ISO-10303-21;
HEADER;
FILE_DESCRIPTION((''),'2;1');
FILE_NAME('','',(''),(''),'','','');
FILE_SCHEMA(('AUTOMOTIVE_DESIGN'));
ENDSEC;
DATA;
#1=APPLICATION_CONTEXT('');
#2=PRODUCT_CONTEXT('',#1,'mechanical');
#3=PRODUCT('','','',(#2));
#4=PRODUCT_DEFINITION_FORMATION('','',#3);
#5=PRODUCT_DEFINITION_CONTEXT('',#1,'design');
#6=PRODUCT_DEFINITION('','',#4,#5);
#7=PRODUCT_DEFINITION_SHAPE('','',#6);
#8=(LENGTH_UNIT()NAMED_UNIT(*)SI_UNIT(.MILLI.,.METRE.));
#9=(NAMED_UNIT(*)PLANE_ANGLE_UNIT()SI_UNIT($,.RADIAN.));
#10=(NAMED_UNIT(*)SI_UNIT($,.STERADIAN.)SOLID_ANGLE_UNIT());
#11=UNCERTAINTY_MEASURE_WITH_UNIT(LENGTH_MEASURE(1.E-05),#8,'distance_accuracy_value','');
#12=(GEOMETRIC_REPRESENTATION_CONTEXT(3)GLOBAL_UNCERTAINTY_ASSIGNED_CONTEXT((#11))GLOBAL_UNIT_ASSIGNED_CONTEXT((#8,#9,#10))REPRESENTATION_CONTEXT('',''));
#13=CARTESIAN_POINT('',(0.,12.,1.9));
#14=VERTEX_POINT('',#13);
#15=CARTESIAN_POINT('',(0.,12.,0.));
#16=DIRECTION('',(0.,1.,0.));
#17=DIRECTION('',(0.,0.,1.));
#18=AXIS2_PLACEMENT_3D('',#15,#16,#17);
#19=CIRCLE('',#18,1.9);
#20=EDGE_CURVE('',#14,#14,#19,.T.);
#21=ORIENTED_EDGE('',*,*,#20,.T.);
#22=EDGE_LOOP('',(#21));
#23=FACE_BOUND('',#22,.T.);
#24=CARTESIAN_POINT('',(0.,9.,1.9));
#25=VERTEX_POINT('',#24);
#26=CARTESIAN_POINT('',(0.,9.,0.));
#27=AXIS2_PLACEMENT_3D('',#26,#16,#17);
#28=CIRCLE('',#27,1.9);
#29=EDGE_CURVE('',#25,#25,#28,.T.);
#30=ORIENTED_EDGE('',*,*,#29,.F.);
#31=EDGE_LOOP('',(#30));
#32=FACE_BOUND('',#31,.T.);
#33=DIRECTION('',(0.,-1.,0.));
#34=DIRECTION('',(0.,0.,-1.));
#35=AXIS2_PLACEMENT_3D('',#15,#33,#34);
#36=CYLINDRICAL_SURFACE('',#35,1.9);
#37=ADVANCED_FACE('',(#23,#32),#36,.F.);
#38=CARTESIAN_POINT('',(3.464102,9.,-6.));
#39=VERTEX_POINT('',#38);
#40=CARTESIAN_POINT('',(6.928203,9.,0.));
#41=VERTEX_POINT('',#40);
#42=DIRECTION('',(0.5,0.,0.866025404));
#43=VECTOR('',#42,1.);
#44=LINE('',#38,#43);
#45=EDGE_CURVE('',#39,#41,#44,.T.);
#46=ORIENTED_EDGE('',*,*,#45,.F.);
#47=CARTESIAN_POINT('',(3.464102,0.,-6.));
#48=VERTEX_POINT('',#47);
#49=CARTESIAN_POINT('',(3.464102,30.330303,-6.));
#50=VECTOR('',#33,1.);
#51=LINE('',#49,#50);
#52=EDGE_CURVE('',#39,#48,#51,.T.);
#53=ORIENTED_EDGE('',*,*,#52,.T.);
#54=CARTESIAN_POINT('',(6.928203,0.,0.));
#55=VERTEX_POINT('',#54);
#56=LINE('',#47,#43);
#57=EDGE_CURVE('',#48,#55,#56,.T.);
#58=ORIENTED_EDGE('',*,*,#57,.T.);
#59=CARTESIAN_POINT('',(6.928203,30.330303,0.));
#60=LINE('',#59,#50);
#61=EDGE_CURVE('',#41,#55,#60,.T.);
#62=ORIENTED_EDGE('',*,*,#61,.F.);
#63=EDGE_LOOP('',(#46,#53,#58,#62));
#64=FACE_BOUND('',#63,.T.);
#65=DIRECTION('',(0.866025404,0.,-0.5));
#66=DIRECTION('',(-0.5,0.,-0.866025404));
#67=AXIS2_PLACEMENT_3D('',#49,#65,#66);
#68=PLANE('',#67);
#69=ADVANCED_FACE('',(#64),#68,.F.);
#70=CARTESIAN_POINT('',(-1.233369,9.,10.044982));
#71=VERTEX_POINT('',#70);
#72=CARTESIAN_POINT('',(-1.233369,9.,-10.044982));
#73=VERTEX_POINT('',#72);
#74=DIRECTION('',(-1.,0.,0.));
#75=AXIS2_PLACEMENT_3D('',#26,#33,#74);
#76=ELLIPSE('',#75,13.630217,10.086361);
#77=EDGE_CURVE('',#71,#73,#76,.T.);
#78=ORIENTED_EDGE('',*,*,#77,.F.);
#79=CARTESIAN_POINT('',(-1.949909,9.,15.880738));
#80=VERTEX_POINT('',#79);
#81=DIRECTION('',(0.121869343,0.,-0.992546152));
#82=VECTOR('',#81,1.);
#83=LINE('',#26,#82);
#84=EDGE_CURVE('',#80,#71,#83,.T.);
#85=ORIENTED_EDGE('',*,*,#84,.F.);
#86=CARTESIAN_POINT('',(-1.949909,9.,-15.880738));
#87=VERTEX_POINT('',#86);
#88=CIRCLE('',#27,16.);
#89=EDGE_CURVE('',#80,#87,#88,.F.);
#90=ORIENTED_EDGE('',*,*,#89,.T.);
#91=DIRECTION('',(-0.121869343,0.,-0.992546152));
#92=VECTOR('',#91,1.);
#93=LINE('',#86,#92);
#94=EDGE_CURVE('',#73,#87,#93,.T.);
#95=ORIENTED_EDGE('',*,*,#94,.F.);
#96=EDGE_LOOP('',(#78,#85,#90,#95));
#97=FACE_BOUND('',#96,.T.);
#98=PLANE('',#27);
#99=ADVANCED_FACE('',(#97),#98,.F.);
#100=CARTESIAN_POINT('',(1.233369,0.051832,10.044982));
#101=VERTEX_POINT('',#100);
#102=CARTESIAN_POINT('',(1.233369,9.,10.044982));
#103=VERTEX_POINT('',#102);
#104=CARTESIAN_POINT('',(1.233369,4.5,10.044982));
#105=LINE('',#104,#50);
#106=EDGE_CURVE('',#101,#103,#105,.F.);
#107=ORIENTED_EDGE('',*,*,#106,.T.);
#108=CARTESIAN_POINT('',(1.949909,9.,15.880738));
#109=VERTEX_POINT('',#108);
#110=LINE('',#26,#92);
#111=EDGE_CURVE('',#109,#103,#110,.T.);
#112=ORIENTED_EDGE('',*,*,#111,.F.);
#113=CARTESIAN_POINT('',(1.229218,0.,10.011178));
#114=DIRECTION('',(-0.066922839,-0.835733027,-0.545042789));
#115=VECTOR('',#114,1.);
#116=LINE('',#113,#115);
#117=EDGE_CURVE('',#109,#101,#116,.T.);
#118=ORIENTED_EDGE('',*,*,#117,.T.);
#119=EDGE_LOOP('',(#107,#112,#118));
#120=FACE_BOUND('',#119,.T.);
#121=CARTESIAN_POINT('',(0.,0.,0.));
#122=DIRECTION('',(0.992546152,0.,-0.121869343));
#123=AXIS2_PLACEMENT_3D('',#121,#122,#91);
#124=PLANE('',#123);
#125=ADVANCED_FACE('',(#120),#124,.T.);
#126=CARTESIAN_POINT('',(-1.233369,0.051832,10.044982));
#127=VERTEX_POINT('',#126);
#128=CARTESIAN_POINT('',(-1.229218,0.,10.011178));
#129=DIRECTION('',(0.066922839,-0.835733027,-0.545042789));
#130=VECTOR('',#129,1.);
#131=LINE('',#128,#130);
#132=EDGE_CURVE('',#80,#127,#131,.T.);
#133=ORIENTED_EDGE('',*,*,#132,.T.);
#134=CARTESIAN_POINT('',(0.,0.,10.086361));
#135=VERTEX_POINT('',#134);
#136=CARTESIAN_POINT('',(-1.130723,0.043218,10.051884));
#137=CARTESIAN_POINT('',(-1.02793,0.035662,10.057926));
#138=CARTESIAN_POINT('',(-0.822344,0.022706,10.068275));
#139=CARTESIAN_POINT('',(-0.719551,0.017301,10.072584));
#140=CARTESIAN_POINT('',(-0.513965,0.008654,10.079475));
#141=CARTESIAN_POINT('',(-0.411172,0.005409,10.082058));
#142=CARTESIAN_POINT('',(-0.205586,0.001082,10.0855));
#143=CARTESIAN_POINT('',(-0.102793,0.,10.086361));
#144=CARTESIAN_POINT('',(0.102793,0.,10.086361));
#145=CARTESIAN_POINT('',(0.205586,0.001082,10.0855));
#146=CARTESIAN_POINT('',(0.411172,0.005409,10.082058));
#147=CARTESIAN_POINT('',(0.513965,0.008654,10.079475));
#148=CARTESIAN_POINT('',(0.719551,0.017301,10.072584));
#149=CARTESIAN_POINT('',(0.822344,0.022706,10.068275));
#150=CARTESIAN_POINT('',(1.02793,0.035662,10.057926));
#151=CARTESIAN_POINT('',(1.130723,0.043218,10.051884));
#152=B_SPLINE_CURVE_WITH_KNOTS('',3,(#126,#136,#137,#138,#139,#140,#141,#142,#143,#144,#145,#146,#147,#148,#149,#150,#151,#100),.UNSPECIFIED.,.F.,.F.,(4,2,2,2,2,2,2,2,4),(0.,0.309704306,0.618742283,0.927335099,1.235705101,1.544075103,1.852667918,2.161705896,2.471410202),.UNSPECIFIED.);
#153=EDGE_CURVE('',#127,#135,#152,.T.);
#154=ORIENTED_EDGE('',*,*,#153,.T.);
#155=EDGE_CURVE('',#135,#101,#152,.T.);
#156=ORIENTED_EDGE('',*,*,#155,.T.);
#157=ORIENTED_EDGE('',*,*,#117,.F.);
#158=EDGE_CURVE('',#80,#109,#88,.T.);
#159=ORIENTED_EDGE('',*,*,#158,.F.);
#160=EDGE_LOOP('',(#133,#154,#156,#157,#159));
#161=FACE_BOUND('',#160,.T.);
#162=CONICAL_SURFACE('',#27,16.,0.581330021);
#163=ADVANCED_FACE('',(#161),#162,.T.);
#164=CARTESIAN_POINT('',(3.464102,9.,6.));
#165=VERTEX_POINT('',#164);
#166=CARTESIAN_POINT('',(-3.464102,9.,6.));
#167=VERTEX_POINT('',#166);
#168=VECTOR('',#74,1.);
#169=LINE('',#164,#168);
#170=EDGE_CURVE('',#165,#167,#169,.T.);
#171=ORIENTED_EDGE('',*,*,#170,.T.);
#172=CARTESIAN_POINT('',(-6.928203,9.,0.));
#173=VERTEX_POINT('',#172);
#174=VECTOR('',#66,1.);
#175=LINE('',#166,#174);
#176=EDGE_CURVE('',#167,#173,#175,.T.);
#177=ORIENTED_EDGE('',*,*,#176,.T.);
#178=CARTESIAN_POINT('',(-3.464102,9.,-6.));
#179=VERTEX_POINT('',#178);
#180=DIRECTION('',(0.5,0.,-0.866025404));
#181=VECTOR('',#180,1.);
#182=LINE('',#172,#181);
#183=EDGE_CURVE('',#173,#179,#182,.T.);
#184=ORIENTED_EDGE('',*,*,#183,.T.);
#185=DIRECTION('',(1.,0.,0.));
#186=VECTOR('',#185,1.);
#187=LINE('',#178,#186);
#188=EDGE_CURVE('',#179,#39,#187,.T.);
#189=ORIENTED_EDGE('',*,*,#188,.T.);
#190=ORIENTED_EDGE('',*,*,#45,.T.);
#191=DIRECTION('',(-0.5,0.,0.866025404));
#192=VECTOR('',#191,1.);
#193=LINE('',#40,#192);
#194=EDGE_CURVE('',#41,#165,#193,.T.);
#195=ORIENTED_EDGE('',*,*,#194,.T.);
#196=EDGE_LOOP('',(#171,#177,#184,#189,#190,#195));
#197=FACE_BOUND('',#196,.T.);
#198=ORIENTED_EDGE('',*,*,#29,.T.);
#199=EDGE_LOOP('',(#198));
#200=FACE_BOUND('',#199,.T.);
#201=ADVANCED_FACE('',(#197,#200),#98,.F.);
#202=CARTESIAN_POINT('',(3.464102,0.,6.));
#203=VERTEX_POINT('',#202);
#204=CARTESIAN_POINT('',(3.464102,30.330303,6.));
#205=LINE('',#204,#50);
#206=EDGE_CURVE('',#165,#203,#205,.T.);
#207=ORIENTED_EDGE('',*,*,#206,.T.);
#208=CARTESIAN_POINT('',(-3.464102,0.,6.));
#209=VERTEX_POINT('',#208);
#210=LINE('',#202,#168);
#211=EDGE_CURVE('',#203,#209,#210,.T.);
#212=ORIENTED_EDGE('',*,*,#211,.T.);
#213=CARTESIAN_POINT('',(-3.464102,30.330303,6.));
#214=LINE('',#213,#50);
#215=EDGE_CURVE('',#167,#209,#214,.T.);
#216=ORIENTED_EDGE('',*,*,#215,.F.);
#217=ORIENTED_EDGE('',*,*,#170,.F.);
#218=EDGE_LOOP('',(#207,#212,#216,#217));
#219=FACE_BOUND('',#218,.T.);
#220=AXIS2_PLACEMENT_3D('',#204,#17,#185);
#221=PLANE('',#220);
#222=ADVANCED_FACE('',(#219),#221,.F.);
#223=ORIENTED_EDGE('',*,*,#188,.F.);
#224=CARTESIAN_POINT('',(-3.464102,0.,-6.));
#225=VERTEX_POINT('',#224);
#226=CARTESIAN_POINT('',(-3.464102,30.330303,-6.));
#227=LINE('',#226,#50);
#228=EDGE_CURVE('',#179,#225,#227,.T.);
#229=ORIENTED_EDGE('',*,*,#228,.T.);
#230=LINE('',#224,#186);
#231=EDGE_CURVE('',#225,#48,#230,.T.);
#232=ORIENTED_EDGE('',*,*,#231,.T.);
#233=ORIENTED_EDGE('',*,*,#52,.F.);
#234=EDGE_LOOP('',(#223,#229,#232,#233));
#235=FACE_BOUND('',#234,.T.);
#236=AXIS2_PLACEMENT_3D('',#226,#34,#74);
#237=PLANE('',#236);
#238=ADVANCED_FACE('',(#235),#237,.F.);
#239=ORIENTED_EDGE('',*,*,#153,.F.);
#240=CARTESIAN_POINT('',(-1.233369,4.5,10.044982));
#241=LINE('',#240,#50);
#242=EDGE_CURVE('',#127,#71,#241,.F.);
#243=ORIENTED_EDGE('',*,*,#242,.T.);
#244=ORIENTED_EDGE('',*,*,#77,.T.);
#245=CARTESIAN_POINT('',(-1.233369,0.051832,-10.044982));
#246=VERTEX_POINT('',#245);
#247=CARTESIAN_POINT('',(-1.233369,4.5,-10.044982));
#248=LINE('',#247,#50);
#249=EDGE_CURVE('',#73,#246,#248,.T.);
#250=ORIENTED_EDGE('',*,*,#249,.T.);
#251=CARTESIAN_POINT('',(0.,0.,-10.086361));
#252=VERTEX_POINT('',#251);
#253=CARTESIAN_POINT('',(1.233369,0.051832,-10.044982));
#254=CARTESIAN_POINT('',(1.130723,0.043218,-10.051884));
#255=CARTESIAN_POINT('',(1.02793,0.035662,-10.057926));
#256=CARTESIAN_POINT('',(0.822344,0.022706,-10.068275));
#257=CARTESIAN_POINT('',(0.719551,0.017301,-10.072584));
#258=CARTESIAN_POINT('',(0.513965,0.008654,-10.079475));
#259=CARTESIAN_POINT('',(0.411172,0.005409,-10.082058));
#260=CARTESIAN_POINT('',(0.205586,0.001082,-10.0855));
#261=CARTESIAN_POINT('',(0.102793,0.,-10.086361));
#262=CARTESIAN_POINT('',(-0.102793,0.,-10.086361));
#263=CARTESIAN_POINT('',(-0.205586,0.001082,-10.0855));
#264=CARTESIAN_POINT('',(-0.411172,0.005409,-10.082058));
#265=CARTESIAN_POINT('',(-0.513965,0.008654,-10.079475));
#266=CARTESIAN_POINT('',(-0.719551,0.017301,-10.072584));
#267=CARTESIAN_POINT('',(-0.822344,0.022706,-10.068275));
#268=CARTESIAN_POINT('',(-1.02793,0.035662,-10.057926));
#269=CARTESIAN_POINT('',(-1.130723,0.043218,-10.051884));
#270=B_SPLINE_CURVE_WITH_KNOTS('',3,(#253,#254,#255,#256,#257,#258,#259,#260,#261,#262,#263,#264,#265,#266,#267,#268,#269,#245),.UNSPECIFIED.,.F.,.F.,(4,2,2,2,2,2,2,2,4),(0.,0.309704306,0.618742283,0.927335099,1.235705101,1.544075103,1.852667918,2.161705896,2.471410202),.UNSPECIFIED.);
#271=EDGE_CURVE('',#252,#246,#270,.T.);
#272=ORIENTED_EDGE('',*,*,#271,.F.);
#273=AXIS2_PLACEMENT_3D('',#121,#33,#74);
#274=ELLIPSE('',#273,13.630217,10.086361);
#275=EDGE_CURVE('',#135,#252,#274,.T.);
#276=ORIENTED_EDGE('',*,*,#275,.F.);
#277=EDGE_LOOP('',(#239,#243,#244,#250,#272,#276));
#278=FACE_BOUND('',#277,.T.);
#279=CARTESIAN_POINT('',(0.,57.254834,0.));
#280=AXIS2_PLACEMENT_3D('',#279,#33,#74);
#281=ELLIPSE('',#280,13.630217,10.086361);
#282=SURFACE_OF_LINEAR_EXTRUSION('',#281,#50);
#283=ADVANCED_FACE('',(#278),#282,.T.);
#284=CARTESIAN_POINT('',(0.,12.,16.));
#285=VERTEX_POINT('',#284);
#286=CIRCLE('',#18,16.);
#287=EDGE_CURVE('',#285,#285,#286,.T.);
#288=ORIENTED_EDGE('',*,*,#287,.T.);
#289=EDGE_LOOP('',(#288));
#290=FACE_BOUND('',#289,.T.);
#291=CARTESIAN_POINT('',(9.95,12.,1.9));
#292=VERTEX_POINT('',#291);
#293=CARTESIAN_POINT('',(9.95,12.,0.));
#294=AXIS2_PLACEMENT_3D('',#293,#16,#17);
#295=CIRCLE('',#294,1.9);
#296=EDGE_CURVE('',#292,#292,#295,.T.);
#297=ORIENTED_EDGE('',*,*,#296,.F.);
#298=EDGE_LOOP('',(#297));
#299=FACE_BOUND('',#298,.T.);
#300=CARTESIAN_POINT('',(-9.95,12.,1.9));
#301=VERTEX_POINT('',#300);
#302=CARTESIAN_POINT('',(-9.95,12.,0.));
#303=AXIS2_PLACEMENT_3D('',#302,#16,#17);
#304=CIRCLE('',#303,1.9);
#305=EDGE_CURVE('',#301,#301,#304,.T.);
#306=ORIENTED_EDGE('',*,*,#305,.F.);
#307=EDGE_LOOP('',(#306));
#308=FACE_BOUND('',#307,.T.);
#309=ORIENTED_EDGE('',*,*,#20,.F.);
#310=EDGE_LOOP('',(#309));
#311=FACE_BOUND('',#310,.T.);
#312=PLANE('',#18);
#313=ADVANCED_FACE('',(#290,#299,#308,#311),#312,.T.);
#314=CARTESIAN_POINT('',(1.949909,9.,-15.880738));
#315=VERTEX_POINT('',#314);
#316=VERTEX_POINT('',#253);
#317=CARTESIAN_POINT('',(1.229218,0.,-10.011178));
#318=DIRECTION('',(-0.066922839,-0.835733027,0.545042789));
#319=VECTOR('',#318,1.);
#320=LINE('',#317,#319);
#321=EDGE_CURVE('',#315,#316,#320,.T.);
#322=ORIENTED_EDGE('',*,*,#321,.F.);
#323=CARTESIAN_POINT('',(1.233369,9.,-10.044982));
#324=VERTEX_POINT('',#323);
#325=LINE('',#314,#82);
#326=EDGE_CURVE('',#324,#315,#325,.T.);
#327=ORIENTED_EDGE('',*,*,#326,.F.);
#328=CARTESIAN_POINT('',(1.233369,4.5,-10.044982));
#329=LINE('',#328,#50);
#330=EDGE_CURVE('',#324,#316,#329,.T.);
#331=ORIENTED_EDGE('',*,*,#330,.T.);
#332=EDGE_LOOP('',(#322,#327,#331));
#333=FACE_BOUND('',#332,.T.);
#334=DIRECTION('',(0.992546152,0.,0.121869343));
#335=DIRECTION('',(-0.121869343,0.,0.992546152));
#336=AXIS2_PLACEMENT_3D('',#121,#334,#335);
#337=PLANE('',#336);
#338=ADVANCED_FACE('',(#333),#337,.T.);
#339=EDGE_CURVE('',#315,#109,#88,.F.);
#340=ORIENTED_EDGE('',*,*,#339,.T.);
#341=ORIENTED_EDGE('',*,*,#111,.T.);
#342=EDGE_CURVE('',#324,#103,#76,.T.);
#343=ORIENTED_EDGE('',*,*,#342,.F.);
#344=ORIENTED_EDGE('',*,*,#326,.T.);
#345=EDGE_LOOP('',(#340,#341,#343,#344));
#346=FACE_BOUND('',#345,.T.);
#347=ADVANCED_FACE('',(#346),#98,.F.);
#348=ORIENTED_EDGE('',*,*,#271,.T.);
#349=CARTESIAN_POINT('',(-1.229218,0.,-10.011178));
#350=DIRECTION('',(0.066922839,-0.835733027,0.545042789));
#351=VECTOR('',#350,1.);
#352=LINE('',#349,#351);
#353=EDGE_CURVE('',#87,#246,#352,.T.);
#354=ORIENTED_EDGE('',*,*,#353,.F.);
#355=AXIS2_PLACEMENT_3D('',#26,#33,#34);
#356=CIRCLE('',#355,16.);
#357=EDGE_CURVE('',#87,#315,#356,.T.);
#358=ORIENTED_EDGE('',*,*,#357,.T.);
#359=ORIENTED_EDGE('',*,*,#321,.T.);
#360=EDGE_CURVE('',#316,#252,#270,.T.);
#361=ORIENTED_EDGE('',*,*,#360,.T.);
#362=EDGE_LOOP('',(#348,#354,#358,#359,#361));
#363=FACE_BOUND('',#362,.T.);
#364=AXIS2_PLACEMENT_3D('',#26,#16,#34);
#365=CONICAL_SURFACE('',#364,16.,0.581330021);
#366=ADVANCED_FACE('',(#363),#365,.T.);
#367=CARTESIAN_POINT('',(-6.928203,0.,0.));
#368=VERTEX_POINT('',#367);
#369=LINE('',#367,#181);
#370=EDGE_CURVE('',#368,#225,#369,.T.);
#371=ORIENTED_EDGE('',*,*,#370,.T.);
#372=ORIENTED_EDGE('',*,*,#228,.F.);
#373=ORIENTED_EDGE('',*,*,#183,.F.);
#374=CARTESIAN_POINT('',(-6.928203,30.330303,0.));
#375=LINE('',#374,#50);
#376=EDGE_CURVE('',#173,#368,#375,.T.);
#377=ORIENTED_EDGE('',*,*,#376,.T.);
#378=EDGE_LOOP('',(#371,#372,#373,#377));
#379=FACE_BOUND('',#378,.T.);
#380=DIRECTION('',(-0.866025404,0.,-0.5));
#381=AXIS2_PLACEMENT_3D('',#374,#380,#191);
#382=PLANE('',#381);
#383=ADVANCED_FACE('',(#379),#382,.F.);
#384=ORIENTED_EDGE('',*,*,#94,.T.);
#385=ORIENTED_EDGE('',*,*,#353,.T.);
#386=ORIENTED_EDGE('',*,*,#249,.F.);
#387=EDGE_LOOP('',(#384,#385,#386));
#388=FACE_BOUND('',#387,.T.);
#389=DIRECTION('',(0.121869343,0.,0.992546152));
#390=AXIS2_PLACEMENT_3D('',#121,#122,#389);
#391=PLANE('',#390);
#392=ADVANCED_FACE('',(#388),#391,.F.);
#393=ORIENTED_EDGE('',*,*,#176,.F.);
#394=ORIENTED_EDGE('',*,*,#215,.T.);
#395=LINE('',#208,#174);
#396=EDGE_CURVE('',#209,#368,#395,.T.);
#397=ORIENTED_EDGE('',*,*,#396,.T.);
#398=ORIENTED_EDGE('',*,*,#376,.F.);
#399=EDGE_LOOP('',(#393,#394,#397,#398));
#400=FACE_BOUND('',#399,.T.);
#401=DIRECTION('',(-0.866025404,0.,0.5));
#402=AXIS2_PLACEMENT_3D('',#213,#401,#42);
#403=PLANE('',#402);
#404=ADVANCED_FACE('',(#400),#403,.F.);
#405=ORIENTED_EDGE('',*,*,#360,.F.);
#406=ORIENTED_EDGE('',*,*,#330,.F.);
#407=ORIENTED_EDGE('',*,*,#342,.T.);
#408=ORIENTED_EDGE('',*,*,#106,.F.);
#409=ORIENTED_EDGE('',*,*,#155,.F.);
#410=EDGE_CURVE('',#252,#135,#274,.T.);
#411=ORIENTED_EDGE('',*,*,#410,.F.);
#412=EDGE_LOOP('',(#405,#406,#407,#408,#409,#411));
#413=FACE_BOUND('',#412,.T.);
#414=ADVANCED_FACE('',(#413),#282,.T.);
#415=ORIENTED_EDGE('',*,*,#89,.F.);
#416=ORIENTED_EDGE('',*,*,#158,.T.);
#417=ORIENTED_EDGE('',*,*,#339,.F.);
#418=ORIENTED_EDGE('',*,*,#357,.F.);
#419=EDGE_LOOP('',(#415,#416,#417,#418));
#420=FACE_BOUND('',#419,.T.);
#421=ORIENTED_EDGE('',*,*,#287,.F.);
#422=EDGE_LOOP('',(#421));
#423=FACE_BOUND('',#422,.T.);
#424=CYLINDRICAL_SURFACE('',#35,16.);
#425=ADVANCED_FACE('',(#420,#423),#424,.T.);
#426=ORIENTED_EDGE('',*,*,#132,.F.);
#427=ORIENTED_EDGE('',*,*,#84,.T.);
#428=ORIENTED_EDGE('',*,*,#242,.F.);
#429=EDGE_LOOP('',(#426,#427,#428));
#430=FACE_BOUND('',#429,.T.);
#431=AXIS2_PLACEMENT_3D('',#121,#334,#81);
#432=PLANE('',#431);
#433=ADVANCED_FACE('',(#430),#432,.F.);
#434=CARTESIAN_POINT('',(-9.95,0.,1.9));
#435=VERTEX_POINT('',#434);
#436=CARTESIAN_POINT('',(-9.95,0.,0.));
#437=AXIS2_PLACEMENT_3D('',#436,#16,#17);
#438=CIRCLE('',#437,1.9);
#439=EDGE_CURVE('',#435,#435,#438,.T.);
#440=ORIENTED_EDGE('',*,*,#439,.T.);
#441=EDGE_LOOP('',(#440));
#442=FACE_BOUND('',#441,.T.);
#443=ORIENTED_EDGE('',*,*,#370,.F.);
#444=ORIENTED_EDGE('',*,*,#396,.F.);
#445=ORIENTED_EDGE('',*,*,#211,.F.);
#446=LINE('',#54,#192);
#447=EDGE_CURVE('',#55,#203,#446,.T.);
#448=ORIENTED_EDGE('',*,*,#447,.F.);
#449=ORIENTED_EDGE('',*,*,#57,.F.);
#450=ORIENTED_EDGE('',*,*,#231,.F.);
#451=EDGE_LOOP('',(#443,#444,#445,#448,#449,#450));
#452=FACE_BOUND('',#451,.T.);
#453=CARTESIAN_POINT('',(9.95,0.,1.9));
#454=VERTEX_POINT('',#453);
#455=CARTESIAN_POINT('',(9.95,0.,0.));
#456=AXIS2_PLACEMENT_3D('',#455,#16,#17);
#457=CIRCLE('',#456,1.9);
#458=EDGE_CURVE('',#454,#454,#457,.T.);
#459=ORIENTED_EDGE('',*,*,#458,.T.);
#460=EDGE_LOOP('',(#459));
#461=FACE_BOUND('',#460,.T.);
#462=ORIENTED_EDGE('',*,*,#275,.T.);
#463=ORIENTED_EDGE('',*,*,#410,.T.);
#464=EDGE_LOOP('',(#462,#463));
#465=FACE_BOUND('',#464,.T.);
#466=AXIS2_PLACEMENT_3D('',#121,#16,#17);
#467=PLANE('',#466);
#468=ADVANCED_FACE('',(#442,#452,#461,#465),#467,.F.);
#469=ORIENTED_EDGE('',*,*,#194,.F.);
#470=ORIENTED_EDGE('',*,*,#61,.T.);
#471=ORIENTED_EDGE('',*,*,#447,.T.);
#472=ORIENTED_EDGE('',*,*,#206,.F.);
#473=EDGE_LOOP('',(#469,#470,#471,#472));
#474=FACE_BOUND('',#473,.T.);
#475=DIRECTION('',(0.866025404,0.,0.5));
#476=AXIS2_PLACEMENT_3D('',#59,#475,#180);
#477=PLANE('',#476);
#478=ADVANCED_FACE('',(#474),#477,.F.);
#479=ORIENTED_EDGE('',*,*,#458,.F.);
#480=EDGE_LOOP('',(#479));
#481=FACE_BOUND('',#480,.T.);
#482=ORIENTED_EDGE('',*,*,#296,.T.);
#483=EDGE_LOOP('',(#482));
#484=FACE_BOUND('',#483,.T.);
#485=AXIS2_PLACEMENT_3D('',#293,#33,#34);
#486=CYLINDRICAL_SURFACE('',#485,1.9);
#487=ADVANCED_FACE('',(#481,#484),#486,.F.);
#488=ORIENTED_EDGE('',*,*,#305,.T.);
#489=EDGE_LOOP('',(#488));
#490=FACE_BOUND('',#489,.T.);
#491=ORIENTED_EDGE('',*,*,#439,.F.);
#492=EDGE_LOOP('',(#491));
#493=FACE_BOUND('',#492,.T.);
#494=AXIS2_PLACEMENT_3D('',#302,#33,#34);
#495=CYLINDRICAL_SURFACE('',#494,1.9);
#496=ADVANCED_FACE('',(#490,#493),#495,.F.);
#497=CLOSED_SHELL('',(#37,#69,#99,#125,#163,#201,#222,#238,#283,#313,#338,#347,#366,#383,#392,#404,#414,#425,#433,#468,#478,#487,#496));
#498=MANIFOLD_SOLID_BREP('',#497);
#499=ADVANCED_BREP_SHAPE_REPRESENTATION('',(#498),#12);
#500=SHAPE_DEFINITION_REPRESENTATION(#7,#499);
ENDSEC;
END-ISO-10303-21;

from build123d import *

# Parameters (mm, degrees)
SKETCH1_R           = 16
SKETCH1_R_2         = 1.9
BOSS_EXTRUDE1_DEPTH = 12
SKETCH3_R           = 16
SKETCH3_RX          = 13.630217139
SKETCH3_RY          = 10.086360683
CUT_EXTRUDE2_DEPTH  = 9
REVOLVE1_ANGLE      = 14
CUT_EXTRUDE3_DEPTH  = 9


# Read off the part's stored shape, not the designer's step: Revolve1
with BuildPart() as part:
    # Sketch1 → Boss-Extrude1 (new body)
    with BuildSketch(Plane(origin=(0, 0, 0), x_dir=(1, 0, 0), z_dir=(0, 1, 0))):
        with Locations(Location((0, 0, 0), (0, 0, 270))):
            Circle(SKETCH1_R)
        with Locations(Location((-9.95, 0, 0), (0, 0, 270))):
            Circle(SKETCH1_R_2, mode=Mode.SUBTRACT)
        with Locations(Location((9.95, 0, 0), (0, 0, 270))):
            Circle(SKETCH1_R_2, mode=Mode.SUBTRACT)
        with Locations(Location((0, 0, 0), (0, 0, 270))):
            Circle(SKETCH1_R_2, mode=Mode.SUBTRACT)
    extrude(amount=BOSS_EXTRUDE1_DEPTH)

    # Sketch3 → Cut-Extrude2 (cut)
    with BuildSketch(Plane.XZ):
        with Locations(Location((0, 0, 0), (0, 0, 90))):
            Circle(SKETCH3_R)
        with Locations(Location((0, 0), (0, 0, 180))):
            Ellipse(SKETCH3_RX, SKETCH3_RY, mode=Mode.SUBTRACT)
    extrude(amount=-CUT_EXTRUDE2_DEPTH, mode=Mode.SUBTRACT)

    # Revolve1 outline → Revolve1 (revolve)
    with BuildSketch(Plane(origin=(0, 0, 0), x_dir=(-0.12186934340514781, 0, 0.992546151641322), z_dir=(-0.992546151641322, 0, -0.12186934340514781))):
        Polygon((10.086360682, 9), (10.086360682, -1e-09), (16, 9), align=None)
    revolve1 = revolve(axis=Axis((0, 0, 0), (0, 1, 0)), revolution_arc=REVOLVE1_ANGLE)

    # Mirror1: Revolve1 across plane
    add(revolve1.mirror(Plane.XY))

    # Sketch6 → Cut-Extrude3 (cut)
    with BuildSketch(Plane.XZ):
        Polygon((3.464101615, 6), (-3.464101615, 6), (-6.92820323, 0), (-3.464101615, -6), (3.464101615, -6), (6.92820323, 0), align=None)
    extrude(amount=-CUT_EXTRUDE3_DEPTH, mode=Mode.SUBTRACT)


solid = part.part
